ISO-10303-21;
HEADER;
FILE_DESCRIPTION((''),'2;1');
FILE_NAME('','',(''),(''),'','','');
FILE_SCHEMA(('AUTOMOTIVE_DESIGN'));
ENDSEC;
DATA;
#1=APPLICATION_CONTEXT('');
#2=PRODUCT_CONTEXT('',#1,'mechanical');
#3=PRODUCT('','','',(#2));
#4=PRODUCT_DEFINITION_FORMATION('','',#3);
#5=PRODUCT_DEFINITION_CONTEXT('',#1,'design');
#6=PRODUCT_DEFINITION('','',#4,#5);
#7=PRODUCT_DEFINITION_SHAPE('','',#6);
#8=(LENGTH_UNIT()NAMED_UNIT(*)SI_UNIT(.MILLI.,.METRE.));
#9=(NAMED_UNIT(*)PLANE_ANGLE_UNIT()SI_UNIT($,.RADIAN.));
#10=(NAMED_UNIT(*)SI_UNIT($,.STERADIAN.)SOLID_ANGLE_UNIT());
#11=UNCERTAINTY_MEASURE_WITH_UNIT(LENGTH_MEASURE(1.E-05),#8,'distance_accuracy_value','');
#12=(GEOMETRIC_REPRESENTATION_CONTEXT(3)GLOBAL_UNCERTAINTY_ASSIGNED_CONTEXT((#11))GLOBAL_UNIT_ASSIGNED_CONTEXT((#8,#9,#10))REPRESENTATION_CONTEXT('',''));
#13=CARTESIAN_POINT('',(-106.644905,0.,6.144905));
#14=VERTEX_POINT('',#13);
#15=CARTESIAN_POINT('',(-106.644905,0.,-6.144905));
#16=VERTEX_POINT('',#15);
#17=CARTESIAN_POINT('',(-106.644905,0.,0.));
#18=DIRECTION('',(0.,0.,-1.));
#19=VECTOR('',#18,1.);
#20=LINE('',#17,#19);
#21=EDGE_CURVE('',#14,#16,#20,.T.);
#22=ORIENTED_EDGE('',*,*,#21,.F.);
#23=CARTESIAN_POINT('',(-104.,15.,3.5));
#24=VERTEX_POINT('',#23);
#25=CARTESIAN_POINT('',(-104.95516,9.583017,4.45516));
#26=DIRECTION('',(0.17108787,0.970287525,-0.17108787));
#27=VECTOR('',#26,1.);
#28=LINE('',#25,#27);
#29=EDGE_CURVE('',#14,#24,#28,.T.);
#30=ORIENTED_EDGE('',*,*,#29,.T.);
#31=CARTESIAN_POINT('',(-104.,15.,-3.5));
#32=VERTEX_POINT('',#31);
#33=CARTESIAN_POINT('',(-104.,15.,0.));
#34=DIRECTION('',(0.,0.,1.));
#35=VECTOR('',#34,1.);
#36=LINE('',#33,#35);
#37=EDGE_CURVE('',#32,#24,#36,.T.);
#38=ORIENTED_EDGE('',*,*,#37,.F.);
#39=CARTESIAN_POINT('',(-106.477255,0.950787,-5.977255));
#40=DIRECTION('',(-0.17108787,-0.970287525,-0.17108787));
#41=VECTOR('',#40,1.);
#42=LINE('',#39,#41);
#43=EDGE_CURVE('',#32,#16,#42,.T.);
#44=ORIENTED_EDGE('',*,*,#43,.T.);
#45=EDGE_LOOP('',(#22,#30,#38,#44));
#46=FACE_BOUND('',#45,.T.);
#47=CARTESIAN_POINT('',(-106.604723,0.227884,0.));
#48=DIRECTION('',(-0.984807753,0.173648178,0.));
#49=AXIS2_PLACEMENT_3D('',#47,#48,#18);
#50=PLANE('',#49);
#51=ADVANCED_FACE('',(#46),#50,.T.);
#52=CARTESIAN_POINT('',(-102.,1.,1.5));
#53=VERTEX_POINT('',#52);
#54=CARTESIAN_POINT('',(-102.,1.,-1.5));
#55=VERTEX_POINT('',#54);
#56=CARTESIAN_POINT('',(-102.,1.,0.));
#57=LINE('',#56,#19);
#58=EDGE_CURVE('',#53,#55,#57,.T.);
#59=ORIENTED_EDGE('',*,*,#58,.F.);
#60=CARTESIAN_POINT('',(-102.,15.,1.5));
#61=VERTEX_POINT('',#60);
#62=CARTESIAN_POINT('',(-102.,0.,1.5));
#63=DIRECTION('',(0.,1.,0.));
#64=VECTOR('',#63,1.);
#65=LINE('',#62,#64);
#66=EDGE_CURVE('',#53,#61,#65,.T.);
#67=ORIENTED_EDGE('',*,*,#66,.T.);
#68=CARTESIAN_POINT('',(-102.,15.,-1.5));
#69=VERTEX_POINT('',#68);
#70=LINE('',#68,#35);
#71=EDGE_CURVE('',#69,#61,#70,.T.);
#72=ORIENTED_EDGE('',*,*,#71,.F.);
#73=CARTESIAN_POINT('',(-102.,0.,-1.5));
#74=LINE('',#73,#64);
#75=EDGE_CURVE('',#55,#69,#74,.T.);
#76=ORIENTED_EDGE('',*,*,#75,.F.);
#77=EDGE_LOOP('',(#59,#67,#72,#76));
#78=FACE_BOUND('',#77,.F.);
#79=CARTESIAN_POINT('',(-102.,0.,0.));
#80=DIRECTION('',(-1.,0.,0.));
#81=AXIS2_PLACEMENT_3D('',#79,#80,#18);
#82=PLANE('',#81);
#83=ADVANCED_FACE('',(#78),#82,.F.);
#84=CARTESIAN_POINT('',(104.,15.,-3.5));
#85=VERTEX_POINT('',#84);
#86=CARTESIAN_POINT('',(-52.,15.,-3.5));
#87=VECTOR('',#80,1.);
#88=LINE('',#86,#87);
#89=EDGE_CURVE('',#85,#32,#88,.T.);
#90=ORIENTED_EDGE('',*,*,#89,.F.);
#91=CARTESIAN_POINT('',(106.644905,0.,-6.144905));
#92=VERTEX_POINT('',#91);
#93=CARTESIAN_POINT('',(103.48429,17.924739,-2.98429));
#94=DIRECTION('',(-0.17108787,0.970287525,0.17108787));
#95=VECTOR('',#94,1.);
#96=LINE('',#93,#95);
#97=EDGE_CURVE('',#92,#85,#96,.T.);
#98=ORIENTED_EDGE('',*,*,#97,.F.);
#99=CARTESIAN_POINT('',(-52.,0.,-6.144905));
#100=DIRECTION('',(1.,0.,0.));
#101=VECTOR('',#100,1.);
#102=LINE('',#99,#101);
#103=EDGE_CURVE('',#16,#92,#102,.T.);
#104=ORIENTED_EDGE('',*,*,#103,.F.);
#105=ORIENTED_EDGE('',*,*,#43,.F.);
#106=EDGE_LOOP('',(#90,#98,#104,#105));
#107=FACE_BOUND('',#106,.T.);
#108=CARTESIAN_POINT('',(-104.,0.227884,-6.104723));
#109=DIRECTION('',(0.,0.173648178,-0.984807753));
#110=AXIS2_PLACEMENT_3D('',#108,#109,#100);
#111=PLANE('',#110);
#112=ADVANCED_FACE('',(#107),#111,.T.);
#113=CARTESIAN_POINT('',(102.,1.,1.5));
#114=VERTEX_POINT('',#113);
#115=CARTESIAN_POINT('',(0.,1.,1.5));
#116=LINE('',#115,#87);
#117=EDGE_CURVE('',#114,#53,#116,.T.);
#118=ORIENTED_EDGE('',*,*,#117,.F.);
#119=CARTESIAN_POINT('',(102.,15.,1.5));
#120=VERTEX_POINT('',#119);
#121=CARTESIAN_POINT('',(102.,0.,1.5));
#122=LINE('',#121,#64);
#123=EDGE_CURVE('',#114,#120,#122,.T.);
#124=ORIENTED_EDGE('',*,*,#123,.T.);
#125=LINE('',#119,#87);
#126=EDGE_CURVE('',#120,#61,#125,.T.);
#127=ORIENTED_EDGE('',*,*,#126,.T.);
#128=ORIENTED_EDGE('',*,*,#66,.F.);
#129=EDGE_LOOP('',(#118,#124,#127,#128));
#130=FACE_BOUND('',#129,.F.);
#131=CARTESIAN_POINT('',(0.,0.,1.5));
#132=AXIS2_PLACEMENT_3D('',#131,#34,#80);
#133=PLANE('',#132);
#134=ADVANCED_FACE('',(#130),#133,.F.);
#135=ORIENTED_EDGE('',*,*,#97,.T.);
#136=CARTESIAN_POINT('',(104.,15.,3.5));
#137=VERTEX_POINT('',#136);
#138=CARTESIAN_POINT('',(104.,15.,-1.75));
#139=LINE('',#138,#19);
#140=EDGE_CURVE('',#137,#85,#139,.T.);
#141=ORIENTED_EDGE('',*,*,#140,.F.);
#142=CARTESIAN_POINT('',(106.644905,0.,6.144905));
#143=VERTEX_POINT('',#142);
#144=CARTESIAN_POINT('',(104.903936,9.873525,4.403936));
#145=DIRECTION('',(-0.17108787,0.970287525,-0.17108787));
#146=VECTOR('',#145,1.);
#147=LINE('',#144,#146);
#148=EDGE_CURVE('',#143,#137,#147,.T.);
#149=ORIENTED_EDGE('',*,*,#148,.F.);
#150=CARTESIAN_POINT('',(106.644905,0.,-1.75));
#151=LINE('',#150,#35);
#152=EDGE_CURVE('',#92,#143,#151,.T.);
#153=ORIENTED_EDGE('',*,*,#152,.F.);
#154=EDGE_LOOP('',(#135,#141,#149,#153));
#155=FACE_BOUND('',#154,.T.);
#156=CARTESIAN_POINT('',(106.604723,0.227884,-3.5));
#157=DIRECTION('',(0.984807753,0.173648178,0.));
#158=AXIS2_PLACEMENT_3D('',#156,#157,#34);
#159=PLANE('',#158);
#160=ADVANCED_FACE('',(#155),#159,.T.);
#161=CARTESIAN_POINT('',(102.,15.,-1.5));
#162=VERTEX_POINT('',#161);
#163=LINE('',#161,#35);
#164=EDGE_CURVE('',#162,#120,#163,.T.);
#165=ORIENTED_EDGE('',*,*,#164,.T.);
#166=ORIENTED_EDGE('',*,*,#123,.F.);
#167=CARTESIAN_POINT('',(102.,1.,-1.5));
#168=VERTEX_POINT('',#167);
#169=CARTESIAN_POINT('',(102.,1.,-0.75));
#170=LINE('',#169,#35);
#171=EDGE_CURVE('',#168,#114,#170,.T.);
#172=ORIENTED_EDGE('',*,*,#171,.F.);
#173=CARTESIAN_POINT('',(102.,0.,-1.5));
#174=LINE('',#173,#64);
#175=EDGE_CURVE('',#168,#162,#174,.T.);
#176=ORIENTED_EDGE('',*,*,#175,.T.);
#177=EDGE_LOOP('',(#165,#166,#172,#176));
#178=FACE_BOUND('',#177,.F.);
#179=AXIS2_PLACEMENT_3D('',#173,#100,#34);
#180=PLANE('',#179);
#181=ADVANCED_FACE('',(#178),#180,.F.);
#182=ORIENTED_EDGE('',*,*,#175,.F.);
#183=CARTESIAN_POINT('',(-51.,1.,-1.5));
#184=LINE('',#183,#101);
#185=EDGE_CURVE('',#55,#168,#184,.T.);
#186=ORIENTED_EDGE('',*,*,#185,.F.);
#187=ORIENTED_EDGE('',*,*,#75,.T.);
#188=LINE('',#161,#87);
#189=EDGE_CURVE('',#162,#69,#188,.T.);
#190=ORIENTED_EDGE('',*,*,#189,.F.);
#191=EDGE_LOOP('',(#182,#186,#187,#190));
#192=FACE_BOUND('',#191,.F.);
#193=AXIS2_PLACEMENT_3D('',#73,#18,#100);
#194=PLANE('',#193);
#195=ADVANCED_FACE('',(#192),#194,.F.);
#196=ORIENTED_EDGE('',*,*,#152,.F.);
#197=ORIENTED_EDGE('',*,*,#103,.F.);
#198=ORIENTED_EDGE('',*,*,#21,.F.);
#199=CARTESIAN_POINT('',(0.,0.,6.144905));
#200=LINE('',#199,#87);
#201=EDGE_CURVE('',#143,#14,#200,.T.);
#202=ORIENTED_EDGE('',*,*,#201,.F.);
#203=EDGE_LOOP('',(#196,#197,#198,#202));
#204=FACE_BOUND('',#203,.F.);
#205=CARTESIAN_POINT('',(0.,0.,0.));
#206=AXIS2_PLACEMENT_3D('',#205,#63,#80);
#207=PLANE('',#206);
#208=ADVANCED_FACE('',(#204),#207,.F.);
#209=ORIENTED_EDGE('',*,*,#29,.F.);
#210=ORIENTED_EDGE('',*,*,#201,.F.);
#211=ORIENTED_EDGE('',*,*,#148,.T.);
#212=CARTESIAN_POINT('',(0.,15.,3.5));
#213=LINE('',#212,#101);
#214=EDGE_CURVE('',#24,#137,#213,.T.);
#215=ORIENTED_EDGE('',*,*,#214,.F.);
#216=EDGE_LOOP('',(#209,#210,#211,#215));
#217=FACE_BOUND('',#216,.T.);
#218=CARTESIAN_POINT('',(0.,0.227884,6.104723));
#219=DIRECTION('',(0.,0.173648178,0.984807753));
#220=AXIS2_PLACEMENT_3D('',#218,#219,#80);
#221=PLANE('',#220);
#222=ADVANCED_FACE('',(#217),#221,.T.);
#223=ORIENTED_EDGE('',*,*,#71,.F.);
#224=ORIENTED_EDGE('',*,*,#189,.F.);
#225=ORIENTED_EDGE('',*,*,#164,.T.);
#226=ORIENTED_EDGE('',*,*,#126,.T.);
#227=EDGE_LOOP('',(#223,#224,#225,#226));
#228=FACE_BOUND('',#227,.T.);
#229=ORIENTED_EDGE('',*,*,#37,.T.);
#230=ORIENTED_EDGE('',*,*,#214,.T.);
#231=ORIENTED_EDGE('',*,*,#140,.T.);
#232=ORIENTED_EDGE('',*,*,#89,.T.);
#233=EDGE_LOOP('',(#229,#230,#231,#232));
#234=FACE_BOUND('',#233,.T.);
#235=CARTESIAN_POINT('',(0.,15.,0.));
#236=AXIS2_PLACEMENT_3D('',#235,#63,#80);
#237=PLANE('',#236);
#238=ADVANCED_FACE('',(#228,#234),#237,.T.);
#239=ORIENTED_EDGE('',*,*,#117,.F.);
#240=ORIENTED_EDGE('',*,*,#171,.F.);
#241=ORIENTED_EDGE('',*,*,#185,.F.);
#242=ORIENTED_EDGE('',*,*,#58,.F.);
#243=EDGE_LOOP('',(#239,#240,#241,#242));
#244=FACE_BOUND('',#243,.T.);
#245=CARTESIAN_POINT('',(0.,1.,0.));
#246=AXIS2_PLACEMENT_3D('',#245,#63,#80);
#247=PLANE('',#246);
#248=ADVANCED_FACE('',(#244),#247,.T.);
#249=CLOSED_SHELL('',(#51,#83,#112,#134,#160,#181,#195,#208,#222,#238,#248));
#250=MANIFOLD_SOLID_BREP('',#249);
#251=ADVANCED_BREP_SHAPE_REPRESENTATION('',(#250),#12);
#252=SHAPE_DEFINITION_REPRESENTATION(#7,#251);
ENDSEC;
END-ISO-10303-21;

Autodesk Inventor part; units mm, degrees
ref_plane "YZ Plane" through (0, 0, 0) normal (1, 0, 0) x (0, 1, 0)
ref_plane "XZ Plane" through (0, 0, 0) normal (0, 1, 0) x (-1, 0, 0)
ref_plane "XY Plane" through (0, 0, 0) normal (0, 0, 1) x (1, 0, 0)
sketch "Skizze1" plane through (0, 0, 0) normal (0, 1, 0) x (-1, 0, 0)
  line L0 (102, -1.5) -> (-102, -1.5)
  line L1 (-102, -1.5) -> (-102, 1.5)
  line L2 (-102, 1.5) -> (102, 1.5)
  line L3 (102, 1.5) -> (102, -1.5)
  line L4 (104, -3.5) -> (-104, -3.5)
  line L5 (-104, -3.5) -> (-104, 3.5)
  line L6 (-104, 3.5) -> (104, 3.5)
  line L7 (104, 3.5) -> (104, -3.5)
  line L8 (0, -4.9) -> (0, 4.9) projected
  line L9 (-145.6, 0) -> (145.6, 0) projected
  point P0 (0, 0)
  dimension "d0" = 204
  dimension "d2" = 3
  dimension "d3" = 2
  dimension "d4" = 2
extrude "Extrusion1" add sketch "Skizze1" along normal blind 15 contours L3 L9 L7 L4 L8 L0 | L8 L4 L5 L9 L1 L0 | L3 L2 L8 L6 L7 L9 | L9 L5 L6 L8 L2 L1
sketch "Skizze2" plane through (0, 0, 0) normal (0, 1, 0) x (-1, 0, 0)
  line L0 (104, 3.5) -> (-104, 3.5) projected
  line L1 (104, -3.5) -> (104, 3.5) projected
  line L2 (-104, -3.5) -> (104, -3.5) projected
  line L3 (-104, 3.5) -> (-104, -3.5) projected
  point P0 (0, 0)
extrude "Extrusion2" add sketch "Skizze2" along normal blind 1
draft "Flächenverjüngung1" angle 10 pull direction (0, 1, 0) faces at (34.6667, 5, -3.5) (104, 10, 1.1667) (-34.6667, 5, 3.5) (-104, 10, -1.1667) fixed edges at (0, 15, -3.5) (104, 15, 0) (0, 15, 3.5) (-104, 15, 0)
properties part number "Stroemungsfilter_Fuss"
